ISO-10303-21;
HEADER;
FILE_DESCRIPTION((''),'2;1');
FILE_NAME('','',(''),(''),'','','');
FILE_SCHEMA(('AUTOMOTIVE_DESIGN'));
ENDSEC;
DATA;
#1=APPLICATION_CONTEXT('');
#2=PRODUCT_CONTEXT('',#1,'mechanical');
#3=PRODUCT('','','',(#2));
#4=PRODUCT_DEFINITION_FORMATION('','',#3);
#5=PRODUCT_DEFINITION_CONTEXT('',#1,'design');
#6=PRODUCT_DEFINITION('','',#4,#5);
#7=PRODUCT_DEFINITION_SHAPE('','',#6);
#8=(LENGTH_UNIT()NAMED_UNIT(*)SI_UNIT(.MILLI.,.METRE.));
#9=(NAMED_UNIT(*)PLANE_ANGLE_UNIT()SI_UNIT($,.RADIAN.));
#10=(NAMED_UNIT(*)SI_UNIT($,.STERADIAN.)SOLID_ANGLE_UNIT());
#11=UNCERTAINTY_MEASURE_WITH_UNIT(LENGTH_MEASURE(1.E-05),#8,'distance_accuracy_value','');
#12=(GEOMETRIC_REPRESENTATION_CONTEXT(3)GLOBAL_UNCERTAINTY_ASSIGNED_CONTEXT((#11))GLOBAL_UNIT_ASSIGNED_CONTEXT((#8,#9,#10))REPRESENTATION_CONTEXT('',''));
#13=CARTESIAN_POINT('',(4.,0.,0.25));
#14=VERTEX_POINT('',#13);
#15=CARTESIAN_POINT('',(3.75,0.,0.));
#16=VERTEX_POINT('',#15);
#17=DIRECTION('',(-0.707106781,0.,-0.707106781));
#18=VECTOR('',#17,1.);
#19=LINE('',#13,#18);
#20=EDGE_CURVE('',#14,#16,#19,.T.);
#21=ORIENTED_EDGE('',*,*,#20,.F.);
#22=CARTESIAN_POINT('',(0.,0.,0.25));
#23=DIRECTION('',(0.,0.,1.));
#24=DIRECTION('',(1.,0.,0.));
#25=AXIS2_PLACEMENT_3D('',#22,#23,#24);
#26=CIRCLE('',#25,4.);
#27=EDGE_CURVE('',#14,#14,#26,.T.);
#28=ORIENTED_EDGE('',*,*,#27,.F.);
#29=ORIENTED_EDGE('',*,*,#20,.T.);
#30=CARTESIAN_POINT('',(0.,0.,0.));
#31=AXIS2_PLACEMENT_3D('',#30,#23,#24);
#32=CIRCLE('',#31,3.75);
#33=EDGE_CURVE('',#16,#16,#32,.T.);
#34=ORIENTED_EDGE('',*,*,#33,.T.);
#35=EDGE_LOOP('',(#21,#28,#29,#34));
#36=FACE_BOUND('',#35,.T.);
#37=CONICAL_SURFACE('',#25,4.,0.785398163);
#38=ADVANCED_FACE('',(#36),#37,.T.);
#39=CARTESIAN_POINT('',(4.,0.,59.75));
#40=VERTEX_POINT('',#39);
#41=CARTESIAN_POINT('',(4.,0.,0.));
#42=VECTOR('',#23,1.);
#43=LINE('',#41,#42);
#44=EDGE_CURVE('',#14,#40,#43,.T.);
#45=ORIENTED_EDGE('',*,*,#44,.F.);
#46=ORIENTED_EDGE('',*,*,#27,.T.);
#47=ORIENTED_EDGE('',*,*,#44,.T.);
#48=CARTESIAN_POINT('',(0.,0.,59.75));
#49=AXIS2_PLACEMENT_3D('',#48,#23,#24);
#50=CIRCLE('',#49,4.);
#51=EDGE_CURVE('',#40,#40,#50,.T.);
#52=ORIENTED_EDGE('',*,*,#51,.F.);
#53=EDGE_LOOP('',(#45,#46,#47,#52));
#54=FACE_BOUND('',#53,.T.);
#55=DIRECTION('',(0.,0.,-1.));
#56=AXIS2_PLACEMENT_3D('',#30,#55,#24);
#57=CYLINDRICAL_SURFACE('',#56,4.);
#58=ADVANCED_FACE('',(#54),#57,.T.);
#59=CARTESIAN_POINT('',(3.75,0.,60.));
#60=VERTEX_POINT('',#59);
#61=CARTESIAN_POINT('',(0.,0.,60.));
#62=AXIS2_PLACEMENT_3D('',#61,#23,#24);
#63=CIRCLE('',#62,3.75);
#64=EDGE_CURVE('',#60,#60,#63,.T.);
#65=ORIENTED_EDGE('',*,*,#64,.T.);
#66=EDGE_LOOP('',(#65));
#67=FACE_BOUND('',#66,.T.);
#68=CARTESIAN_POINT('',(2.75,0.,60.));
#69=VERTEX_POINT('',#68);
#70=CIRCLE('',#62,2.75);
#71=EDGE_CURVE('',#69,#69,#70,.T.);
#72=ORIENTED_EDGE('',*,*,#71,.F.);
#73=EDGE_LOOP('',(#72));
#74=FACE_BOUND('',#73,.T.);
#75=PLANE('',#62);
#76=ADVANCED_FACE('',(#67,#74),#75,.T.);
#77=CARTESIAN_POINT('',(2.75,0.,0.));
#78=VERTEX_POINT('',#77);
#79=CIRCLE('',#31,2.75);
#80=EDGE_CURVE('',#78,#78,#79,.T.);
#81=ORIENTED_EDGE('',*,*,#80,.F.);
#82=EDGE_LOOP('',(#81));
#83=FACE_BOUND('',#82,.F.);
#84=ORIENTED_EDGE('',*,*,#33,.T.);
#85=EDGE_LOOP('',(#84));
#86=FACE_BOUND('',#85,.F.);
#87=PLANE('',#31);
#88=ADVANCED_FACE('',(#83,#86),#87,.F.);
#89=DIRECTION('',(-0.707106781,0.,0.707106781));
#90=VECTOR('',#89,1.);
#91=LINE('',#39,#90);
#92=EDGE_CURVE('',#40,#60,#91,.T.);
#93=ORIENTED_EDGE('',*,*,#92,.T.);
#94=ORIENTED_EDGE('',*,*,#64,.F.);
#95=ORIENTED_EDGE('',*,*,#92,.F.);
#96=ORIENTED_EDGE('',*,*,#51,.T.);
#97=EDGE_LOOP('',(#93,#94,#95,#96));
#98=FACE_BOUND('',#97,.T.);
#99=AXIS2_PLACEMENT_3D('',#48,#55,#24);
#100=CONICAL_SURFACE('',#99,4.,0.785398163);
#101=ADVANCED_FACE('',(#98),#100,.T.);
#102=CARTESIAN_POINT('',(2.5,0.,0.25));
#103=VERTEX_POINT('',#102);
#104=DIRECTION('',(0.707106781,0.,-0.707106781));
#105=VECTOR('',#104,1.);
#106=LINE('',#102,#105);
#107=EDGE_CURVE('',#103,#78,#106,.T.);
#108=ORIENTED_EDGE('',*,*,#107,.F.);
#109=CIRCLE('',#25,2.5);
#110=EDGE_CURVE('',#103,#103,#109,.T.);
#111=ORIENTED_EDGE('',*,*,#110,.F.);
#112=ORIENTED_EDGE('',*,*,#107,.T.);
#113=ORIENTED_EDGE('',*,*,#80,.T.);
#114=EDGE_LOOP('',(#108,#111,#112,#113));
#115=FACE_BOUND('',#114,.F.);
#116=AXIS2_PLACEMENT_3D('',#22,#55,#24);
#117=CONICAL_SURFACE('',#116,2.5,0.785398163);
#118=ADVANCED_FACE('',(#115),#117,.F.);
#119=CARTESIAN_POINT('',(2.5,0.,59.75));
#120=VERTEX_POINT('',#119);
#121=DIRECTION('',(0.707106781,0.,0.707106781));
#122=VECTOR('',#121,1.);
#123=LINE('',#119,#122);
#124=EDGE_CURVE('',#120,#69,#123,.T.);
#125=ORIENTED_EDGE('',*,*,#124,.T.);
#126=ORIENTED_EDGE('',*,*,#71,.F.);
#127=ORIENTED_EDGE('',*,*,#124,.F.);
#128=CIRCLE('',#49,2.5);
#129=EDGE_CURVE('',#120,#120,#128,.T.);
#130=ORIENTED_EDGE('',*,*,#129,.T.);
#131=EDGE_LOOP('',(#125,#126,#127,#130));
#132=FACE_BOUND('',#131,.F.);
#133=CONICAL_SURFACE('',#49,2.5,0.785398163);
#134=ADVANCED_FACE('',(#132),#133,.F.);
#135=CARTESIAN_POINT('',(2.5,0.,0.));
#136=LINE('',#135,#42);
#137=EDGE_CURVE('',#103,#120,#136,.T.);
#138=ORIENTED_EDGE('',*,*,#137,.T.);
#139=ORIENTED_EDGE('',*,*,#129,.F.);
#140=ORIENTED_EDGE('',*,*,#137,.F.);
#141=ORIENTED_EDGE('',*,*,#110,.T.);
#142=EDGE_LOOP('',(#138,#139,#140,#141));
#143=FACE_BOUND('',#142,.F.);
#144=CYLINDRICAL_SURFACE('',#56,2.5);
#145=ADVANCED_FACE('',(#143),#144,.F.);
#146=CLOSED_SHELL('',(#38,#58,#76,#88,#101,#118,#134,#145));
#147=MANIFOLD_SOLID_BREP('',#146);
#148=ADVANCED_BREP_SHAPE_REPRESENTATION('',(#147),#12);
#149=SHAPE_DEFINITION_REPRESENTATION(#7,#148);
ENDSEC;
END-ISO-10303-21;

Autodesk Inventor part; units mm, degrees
ref_plane "YZ Plane" through (0, 0, 0) normal (1, 0, 0) x (0, 1, 0)
ref_plane "XZ Plane" through (0, 0, 0) normal (0, 1, 0) x (-1, 0, 0)
ref_plane "XY Plane" through (0, 0, 0) normal (0, 0, 1) x (1, 0, 0)
sketch "Sketch1" plane through (0, 0, 0) normal (0, 0, 1) x (1, 0, 0)
  circle A0 centre (0, 0) radius 4
  circle A1 centre (0, 0) radius 2.5
  dimension "d0" = 8
  dimension "d1" = 5
extrude "Extrusion1" add sketch "Sketch1" along normal blind 60
chamfer "Chamfer1" distance 0.25 angle 45 4 edges at (-4, 0, 0) (-4, 0, 60) (-2.5, 0, 0) (-2.5, 0, 60)
thread "Thread1" size "M5x0.8" class "6H" standard "ANSI Metric M Profile" length 10
thread "Thread2" size "M5x0.8" class "6H" standard "ANSI Metric M Profile" length 10
properties part number "60mm M5 Standoff" material "Aluminum 6061"
